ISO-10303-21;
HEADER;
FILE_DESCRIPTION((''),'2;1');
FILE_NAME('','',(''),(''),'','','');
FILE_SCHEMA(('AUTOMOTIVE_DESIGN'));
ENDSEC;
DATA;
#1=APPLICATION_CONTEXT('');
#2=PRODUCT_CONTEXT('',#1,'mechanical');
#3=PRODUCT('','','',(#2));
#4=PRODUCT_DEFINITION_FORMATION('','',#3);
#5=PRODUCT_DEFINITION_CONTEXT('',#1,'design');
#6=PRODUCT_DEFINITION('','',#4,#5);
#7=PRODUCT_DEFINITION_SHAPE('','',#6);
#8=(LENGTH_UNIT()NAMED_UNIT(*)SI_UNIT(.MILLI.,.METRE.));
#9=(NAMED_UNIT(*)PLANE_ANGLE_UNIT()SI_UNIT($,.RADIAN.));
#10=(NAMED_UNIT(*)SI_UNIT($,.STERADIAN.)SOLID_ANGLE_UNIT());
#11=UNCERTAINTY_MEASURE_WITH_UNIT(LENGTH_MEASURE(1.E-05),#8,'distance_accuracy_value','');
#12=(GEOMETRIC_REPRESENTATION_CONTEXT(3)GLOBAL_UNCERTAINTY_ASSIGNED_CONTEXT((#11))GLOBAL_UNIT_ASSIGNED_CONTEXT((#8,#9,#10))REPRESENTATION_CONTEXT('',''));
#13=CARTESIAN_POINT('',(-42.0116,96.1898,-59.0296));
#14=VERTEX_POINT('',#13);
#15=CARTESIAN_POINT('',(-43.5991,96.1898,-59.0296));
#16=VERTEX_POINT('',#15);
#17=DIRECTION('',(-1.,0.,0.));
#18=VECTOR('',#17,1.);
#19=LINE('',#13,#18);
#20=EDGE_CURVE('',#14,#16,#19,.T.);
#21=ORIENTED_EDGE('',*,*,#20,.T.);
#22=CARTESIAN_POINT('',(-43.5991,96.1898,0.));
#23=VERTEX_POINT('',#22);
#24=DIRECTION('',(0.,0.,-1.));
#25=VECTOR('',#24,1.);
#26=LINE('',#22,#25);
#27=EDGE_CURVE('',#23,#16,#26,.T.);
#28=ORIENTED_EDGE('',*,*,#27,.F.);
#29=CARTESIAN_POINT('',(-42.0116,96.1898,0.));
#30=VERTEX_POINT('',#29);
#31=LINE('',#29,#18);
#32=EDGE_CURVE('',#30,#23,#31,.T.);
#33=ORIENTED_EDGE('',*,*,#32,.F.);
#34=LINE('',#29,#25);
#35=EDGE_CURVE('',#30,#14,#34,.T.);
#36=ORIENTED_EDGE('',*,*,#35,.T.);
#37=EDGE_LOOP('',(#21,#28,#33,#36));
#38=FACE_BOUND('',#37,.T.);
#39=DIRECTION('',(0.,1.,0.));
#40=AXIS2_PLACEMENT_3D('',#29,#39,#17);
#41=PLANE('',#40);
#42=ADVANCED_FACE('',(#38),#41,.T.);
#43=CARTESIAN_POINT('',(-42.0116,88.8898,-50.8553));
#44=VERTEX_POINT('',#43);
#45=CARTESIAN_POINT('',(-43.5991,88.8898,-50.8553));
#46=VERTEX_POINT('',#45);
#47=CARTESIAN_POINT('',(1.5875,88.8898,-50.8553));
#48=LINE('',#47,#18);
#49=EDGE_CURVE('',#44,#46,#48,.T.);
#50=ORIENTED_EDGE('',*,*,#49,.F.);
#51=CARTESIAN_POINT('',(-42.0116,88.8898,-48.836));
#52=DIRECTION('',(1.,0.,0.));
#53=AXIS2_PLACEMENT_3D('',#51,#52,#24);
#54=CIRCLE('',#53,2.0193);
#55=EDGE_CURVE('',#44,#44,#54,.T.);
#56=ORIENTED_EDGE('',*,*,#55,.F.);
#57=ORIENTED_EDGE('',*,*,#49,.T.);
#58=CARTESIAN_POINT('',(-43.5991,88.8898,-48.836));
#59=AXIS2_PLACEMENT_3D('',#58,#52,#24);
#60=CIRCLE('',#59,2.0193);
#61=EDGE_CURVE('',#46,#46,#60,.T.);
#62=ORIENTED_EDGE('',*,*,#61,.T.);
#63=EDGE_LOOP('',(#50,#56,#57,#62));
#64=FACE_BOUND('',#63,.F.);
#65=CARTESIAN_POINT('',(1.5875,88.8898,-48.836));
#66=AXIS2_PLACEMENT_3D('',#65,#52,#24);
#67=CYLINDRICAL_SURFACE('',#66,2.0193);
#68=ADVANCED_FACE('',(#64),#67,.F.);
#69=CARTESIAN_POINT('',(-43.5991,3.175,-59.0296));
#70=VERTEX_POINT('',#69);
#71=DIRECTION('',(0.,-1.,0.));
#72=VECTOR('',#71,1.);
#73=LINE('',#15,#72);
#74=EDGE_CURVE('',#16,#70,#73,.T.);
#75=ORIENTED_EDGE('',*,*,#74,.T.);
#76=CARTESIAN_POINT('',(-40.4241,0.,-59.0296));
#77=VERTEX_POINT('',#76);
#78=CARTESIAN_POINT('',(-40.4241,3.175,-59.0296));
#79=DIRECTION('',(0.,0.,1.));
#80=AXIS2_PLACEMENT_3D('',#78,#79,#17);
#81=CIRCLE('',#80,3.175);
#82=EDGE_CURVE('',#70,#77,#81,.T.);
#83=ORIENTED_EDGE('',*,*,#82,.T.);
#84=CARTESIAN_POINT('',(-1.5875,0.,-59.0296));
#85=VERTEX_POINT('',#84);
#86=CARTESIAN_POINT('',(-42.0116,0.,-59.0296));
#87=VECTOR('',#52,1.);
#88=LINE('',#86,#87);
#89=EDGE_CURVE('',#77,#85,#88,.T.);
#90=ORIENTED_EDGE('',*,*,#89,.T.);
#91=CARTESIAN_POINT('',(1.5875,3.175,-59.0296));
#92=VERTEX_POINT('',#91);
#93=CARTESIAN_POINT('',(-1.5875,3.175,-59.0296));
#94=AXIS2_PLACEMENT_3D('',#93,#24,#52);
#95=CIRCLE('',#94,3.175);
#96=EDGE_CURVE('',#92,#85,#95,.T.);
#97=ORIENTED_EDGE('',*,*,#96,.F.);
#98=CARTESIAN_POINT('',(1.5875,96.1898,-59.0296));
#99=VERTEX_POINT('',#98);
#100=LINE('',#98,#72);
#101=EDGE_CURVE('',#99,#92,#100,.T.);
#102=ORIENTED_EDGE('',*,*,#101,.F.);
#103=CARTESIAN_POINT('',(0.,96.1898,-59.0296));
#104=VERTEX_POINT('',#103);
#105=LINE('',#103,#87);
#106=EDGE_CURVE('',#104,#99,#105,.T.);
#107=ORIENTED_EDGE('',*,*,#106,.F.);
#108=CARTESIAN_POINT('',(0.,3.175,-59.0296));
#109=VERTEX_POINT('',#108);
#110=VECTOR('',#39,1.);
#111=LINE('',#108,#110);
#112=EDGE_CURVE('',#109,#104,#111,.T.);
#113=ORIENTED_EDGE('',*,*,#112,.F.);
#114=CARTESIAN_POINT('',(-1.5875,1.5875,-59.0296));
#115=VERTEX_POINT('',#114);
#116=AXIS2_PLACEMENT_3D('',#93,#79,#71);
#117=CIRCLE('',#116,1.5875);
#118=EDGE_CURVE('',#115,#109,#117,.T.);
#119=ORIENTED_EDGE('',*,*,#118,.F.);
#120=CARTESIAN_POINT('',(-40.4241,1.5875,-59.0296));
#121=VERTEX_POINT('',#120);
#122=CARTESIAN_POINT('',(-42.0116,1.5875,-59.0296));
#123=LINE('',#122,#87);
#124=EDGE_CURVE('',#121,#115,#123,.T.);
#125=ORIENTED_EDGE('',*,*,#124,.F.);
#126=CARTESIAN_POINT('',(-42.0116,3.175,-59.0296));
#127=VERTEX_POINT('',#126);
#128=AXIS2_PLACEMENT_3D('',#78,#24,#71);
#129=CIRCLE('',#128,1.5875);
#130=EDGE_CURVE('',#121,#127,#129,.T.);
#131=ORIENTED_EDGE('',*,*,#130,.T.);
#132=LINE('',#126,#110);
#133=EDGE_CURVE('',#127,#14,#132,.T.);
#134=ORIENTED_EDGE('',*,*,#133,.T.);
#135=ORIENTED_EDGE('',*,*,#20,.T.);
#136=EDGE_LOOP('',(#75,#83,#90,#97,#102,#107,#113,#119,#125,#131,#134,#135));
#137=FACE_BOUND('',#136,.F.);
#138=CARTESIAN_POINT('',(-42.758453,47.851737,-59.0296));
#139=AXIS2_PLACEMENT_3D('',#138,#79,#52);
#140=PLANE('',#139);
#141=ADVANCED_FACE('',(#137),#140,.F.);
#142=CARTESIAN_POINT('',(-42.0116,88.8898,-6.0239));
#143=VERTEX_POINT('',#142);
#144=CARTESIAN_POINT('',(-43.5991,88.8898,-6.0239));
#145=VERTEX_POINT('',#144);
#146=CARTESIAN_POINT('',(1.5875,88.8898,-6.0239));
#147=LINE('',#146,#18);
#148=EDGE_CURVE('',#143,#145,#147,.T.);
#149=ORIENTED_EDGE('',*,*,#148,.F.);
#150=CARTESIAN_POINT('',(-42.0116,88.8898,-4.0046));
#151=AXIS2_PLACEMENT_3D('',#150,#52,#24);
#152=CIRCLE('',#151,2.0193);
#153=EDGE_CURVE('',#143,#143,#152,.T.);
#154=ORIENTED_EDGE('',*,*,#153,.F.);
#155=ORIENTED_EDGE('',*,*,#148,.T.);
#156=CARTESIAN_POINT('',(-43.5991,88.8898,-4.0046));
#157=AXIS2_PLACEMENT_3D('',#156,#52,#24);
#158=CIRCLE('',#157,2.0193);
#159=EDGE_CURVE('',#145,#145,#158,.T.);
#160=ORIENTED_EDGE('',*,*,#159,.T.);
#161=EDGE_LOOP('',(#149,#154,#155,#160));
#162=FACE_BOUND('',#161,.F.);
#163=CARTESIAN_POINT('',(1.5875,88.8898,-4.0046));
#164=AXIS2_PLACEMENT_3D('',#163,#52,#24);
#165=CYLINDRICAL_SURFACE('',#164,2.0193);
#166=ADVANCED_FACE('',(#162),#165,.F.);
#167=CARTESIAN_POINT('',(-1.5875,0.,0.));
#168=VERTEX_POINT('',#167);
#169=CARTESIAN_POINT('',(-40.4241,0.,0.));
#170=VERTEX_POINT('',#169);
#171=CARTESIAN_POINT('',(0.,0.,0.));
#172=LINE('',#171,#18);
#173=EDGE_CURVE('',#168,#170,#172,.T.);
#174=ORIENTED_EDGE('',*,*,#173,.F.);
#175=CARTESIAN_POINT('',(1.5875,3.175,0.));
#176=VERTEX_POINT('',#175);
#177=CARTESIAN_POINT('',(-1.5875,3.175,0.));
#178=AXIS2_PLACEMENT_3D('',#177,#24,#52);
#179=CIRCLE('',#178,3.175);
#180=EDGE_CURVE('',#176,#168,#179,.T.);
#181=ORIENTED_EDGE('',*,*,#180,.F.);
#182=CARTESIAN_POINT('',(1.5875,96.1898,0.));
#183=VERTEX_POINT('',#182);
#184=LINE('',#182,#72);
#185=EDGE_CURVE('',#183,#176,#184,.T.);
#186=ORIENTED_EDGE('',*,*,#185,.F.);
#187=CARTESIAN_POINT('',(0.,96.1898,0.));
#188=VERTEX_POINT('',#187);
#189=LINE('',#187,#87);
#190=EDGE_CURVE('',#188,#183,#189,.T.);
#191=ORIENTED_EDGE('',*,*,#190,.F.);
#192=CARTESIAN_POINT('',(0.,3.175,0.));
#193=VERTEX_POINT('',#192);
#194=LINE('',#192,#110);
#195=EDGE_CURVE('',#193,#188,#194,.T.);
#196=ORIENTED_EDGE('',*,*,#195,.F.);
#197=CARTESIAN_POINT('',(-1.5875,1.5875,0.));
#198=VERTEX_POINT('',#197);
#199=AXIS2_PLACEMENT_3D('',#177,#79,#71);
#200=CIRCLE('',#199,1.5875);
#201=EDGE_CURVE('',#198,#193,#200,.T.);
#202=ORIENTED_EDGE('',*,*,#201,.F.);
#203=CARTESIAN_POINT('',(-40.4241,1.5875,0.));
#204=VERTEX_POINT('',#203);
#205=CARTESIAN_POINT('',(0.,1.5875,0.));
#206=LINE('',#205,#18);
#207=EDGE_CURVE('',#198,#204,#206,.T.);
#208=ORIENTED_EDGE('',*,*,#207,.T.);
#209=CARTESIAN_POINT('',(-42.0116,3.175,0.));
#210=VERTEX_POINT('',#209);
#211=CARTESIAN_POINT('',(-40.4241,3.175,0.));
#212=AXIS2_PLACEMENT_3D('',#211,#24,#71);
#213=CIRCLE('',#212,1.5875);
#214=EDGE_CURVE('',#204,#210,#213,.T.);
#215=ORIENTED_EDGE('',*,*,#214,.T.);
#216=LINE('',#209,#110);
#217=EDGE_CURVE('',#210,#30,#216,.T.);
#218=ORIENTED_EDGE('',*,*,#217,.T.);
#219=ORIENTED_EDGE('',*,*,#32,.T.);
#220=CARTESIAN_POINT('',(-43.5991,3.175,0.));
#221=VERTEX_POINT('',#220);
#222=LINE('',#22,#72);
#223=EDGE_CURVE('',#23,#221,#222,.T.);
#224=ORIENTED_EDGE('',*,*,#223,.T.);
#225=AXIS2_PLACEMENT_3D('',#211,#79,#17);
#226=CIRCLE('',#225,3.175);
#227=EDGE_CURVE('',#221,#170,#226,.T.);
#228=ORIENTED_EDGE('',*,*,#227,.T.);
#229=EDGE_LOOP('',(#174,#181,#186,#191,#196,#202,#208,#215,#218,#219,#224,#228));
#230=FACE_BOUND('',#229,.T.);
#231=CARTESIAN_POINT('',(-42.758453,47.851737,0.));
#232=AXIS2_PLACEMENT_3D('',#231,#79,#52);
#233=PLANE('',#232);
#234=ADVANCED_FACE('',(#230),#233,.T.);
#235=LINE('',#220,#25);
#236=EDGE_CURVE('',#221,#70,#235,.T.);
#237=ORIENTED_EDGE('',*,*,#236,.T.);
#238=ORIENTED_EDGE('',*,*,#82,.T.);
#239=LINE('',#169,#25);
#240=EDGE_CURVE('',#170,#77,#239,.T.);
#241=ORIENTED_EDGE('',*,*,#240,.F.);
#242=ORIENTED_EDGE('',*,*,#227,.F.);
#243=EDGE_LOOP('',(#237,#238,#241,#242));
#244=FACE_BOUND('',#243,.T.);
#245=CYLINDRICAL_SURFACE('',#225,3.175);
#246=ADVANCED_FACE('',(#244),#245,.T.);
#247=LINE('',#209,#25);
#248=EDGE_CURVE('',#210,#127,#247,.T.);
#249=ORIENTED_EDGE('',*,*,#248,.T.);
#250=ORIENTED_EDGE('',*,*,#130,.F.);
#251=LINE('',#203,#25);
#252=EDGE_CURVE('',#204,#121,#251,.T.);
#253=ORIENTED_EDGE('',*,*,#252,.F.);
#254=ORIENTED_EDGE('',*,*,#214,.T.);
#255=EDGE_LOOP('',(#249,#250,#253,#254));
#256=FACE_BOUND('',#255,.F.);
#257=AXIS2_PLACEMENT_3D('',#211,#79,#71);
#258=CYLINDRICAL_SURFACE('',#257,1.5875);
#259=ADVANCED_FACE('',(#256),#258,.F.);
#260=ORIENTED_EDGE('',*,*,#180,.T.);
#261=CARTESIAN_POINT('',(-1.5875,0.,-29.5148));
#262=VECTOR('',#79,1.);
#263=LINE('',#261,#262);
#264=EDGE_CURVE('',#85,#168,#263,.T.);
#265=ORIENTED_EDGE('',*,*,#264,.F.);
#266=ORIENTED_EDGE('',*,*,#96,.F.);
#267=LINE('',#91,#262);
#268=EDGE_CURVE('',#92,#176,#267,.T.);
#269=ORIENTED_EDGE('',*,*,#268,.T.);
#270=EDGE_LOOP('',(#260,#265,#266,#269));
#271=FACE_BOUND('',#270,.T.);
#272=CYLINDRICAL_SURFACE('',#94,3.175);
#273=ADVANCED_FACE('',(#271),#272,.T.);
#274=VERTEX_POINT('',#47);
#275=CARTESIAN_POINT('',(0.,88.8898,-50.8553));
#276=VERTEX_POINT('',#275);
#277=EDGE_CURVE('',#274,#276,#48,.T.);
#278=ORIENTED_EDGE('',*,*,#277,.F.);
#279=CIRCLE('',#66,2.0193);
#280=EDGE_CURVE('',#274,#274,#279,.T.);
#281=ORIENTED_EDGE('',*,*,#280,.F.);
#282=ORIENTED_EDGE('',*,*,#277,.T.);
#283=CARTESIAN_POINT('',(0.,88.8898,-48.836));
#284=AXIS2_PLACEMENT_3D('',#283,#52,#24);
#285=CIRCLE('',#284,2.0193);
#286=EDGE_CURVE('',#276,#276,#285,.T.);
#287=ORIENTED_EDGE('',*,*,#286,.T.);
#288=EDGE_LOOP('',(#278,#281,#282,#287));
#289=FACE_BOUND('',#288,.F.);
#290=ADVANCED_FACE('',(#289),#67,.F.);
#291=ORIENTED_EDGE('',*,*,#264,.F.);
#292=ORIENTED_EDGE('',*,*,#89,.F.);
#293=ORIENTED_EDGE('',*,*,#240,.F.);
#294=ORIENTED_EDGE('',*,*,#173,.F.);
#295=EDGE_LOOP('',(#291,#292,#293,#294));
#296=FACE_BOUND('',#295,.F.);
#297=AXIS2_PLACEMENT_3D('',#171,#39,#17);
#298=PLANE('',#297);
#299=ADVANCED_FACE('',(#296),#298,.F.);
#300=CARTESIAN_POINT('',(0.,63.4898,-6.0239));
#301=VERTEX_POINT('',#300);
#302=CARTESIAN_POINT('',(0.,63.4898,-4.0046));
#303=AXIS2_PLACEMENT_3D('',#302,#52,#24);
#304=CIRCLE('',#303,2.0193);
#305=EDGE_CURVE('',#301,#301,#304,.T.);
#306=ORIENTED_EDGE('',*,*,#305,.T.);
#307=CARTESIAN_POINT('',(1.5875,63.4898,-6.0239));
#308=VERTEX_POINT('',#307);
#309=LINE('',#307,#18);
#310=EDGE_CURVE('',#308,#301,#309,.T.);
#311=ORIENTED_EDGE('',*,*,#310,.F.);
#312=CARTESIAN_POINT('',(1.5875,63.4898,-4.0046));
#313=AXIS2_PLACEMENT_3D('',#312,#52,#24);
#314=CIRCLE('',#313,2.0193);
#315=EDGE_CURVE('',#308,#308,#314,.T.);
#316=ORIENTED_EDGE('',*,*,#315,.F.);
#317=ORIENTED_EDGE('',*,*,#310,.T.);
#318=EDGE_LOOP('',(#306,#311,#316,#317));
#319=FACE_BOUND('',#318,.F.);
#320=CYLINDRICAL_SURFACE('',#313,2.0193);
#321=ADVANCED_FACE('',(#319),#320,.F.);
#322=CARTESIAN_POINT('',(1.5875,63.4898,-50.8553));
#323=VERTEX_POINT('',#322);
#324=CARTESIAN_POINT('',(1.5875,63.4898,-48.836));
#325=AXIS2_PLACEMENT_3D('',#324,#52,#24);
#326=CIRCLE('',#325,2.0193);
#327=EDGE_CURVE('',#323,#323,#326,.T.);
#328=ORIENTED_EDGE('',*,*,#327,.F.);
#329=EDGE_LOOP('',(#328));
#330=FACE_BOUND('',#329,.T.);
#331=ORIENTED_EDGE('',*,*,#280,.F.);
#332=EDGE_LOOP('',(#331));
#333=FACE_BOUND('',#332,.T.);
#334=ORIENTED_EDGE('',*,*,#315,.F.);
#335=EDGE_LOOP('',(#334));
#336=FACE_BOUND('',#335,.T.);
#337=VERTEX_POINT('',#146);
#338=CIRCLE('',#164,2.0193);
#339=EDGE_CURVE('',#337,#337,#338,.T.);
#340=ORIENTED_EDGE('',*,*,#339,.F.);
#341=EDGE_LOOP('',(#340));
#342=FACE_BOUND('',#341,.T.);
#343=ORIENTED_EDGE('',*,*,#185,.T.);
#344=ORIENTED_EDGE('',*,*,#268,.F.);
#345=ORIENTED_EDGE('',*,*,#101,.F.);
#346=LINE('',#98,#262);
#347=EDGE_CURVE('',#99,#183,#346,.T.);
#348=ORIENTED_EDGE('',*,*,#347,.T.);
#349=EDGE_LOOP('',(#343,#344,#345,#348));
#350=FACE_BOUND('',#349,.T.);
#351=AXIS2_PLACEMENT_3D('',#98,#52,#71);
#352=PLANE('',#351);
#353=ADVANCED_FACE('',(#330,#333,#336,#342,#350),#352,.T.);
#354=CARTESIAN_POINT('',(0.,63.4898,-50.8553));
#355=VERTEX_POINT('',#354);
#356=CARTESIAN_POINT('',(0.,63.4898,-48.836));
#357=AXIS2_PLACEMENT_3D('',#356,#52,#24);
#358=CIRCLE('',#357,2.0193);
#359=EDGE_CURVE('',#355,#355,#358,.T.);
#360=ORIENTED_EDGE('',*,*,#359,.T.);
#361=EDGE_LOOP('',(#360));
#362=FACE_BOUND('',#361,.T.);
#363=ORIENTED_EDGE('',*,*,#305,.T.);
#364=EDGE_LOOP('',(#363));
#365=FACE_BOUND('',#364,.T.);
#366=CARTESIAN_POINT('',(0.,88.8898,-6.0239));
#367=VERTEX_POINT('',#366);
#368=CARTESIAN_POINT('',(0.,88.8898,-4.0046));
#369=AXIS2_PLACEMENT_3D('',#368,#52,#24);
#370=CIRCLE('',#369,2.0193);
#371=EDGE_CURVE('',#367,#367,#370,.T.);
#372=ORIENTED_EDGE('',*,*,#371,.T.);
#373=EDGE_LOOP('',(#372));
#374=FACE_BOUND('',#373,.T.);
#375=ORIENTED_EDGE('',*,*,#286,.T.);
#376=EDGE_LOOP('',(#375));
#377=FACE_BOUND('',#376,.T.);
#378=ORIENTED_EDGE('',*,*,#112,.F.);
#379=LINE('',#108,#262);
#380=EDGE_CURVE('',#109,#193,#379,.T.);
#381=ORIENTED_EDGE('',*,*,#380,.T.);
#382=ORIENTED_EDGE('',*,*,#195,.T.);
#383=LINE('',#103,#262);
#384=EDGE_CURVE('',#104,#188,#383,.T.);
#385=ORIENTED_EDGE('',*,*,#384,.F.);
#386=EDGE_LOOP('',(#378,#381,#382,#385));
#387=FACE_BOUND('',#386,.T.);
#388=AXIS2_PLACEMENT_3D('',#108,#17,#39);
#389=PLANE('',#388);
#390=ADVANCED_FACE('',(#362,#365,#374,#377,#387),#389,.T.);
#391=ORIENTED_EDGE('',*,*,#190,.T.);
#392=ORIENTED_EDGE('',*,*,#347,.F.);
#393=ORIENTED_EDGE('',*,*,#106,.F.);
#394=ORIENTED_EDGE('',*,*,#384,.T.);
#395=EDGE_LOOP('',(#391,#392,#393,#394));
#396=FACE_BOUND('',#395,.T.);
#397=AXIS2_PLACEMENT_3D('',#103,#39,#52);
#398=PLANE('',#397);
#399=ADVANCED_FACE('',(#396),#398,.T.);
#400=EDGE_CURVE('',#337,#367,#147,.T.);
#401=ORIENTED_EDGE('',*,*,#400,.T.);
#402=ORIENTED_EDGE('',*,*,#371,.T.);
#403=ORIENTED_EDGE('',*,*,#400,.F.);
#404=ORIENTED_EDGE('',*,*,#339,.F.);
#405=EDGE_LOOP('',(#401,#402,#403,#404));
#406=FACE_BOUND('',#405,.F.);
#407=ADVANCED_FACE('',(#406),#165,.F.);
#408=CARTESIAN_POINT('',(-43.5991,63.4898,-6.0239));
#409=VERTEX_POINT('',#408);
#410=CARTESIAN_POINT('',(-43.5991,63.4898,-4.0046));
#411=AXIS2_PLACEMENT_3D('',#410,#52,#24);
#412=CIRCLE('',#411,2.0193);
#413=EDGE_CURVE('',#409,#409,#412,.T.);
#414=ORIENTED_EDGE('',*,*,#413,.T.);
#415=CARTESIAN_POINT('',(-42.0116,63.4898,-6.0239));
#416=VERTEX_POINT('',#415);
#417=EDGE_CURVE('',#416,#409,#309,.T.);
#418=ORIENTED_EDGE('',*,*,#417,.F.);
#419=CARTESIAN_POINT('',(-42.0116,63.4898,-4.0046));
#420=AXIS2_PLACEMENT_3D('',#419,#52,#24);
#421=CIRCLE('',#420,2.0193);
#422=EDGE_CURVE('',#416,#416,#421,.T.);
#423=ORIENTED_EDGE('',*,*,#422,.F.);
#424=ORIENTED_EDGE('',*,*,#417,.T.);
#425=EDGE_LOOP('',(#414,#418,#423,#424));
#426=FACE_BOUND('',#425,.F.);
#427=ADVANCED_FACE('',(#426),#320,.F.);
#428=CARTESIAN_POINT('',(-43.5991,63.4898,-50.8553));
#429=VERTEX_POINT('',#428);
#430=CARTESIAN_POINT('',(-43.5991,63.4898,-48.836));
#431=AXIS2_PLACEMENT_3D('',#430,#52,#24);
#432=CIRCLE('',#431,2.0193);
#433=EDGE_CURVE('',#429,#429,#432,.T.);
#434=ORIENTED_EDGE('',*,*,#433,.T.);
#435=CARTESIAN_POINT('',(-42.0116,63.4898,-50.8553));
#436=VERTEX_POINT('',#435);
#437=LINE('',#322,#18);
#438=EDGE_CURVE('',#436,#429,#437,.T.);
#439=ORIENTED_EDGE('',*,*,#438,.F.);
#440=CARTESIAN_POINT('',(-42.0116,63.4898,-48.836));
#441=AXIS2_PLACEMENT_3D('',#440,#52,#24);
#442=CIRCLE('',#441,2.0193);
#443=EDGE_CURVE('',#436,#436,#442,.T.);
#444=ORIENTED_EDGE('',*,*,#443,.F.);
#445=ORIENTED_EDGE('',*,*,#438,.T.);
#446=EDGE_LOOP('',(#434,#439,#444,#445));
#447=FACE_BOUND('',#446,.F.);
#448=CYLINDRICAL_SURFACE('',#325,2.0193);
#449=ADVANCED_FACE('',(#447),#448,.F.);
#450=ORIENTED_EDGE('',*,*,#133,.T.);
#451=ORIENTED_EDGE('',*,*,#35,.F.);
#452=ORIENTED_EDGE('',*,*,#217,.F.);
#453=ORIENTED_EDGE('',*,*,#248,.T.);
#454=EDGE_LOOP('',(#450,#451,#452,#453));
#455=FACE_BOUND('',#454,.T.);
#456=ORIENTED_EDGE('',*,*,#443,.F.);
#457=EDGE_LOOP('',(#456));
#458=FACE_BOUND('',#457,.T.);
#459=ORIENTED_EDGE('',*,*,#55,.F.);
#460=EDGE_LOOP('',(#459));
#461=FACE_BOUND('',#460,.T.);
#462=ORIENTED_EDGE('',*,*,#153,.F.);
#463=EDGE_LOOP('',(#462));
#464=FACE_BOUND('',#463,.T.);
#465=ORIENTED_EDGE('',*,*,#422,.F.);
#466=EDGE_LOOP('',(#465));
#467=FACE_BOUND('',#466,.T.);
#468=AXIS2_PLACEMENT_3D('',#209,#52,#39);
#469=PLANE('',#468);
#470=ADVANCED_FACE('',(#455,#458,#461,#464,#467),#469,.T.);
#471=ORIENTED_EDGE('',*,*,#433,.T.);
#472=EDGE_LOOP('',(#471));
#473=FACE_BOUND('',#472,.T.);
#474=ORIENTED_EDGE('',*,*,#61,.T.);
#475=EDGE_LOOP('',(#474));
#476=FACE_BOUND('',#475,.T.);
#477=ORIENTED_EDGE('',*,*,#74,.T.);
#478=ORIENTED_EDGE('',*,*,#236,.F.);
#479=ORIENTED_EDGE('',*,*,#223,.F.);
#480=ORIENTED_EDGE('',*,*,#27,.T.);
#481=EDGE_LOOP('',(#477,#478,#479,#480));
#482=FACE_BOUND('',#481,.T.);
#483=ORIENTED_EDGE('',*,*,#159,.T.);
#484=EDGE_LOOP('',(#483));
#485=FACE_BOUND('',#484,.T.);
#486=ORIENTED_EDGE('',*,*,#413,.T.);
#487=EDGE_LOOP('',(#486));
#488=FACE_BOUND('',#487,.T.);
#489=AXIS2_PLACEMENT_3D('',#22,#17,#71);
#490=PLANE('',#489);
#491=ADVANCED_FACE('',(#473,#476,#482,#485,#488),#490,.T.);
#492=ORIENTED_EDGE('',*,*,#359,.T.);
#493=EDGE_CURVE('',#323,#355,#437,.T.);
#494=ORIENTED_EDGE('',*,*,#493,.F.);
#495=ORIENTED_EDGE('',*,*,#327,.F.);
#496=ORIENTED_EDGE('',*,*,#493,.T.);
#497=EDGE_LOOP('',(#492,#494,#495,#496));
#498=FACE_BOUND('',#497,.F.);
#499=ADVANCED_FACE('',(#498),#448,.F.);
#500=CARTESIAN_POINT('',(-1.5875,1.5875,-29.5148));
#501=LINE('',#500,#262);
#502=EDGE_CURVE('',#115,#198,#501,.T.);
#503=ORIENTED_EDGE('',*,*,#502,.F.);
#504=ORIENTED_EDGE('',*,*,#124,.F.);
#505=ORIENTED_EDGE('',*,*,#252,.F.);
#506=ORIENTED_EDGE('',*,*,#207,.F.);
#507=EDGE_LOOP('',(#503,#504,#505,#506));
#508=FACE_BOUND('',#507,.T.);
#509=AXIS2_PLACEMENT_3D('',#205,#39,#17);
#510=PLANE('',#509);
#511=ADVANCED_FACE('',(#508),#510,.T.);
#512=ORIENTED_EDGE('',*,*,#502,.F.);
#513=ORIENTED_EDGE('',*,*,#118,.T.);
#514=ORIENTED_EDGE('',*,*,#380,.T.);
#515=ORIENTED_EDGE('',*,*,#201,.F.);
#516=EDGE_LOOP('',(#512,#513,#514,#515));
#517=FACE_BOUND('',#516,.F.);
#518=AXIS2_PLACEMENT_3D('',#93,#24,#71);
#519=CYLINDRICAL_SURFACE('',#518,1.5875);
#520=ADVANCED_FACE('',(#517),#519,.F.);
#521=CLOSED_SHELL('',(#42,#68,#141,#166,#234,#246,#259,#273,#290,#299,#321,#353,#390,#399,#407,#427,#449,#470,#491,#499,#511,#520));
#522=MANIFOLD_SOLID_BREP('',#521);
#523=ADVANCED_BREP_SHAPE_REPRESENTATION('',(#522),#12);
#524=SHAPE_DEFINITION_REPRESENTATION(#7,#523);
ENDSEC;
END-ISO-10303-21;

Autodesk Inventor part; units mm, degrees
ref_plane "YZ Plane" through (0, 0, 0) normal (1, 0, 0) x (0, 1, 0)
ref_plane "XZ Plane" through (0, 0, 0) normal (0, 1, 0) x (-1, 0, 0)
ref_plane "XY Plane" through (0, 0, 0) normal (0, 0, 1) x (1, 0, 0)
sketch "Sketch1" plane through (0, 0, 0) normal (0, 1, 0) x (-1, 0, 0)
  line L0 (0, 0) -> (42.0116, 0)
  line L1 (42.0116, 0) -> (42.0116, -59.0296)
  line L2 (42.0116, -59.0296) -> (0, -59.0296)
  line L3 (0, -59.0296) -> (0, 0)
  dimension "d0" = 42.0116
  dimension "d1" = 59.0296
extrude "Plate1" add sketch "Sketch1" along normal blind 1.5875
sketch "Sketch2" plane through (-42.0116, 1.5875, 0) normal (-1, 0, 0) x (0, -1, 0)
  line L0 (0, -59.0296) -> (0, 0)
  line L1 (0, 0) -> (-94.6023, 0)
  line L2 (-94.6023, 0) -> (-94.6023, -59.0296)
  line L3 (-94.6023, -59.0296) -> (0, -59.0296)
edge flange "Flange1" height 96.1898 angle 90 thickness 1.5875 bend radius 1.5875 thickness toward (-1, 0, 0) relief straight relief width 1.5875 relief depth 0.7937 corner gap 1.5875 corner form 0 edges at (-42.0116, 1.5875, -29.5148) (0, 1.5875, -29.5148) wall of the first edge with corners at (-42.0116, 1.5875, -59.0296) (-42.0116, 1.5875, 0) (-42.0116, 96.1898, 0) (-42.0116, 96.1898, -59.0296)
bend "Bend1"
corner "Corner1"
sketch "Sketch3" plane through (1.5875, 96.1898, 0) normal (1, 0, 0) x (0, 0, -1)
  circle A0 centre (4.0046, -7.3) radius 2.0193 projected
  circle A1 centre (48.836, -7.3) radius 2.0193 projected
  circle A2 centre (48.836, -32.7) radius 2.0193 projected
  circle A3 centre (48.836, -32.7) radius 2.0193 projected
  circle A4 centre (4.0046, -32.7) radius 2.0193 projected
  point P0 (0, -96.1898)
extrude "Extrusion1" cut sketch "Sketch3" against normal up to surface (45.1866 mm away)
equation "\"d3\" = BendReliefWidth"
equation "\"d4\" = BendReliefDepth"
equation "\"d5\" = MinimumRemnant"
equation "\"d6\" = BendRadius"
equation "\"d9\" = BendRadius"
equation "\"d10\" = CornerReliefSize"
equation "\"d11\" = GapSize"
equation "\"d12\" = JacobiRadiusSize"
equation "\"BendRadius\" = Thickness"
equation "\"BendReliefWidth\" = Thickness"
equation "\"BendReliefDepth\" = 0.5 * Thickness"
equation "\"CornerReliefSize\" = 4 * Thickness"
equation "\"MinimumRemnant\" = 2 * Thickness"
equation "\"TransitionRadius\" = BendRadius"
equation "\"JacobiRadiusSize\" = Thickness"
equation "\"GapSize\" = Thickness"
equation "\"d2\" = BendRadius"
equation "\"Thickness\" = 1.5875"
properties part number "lifterMountB"
